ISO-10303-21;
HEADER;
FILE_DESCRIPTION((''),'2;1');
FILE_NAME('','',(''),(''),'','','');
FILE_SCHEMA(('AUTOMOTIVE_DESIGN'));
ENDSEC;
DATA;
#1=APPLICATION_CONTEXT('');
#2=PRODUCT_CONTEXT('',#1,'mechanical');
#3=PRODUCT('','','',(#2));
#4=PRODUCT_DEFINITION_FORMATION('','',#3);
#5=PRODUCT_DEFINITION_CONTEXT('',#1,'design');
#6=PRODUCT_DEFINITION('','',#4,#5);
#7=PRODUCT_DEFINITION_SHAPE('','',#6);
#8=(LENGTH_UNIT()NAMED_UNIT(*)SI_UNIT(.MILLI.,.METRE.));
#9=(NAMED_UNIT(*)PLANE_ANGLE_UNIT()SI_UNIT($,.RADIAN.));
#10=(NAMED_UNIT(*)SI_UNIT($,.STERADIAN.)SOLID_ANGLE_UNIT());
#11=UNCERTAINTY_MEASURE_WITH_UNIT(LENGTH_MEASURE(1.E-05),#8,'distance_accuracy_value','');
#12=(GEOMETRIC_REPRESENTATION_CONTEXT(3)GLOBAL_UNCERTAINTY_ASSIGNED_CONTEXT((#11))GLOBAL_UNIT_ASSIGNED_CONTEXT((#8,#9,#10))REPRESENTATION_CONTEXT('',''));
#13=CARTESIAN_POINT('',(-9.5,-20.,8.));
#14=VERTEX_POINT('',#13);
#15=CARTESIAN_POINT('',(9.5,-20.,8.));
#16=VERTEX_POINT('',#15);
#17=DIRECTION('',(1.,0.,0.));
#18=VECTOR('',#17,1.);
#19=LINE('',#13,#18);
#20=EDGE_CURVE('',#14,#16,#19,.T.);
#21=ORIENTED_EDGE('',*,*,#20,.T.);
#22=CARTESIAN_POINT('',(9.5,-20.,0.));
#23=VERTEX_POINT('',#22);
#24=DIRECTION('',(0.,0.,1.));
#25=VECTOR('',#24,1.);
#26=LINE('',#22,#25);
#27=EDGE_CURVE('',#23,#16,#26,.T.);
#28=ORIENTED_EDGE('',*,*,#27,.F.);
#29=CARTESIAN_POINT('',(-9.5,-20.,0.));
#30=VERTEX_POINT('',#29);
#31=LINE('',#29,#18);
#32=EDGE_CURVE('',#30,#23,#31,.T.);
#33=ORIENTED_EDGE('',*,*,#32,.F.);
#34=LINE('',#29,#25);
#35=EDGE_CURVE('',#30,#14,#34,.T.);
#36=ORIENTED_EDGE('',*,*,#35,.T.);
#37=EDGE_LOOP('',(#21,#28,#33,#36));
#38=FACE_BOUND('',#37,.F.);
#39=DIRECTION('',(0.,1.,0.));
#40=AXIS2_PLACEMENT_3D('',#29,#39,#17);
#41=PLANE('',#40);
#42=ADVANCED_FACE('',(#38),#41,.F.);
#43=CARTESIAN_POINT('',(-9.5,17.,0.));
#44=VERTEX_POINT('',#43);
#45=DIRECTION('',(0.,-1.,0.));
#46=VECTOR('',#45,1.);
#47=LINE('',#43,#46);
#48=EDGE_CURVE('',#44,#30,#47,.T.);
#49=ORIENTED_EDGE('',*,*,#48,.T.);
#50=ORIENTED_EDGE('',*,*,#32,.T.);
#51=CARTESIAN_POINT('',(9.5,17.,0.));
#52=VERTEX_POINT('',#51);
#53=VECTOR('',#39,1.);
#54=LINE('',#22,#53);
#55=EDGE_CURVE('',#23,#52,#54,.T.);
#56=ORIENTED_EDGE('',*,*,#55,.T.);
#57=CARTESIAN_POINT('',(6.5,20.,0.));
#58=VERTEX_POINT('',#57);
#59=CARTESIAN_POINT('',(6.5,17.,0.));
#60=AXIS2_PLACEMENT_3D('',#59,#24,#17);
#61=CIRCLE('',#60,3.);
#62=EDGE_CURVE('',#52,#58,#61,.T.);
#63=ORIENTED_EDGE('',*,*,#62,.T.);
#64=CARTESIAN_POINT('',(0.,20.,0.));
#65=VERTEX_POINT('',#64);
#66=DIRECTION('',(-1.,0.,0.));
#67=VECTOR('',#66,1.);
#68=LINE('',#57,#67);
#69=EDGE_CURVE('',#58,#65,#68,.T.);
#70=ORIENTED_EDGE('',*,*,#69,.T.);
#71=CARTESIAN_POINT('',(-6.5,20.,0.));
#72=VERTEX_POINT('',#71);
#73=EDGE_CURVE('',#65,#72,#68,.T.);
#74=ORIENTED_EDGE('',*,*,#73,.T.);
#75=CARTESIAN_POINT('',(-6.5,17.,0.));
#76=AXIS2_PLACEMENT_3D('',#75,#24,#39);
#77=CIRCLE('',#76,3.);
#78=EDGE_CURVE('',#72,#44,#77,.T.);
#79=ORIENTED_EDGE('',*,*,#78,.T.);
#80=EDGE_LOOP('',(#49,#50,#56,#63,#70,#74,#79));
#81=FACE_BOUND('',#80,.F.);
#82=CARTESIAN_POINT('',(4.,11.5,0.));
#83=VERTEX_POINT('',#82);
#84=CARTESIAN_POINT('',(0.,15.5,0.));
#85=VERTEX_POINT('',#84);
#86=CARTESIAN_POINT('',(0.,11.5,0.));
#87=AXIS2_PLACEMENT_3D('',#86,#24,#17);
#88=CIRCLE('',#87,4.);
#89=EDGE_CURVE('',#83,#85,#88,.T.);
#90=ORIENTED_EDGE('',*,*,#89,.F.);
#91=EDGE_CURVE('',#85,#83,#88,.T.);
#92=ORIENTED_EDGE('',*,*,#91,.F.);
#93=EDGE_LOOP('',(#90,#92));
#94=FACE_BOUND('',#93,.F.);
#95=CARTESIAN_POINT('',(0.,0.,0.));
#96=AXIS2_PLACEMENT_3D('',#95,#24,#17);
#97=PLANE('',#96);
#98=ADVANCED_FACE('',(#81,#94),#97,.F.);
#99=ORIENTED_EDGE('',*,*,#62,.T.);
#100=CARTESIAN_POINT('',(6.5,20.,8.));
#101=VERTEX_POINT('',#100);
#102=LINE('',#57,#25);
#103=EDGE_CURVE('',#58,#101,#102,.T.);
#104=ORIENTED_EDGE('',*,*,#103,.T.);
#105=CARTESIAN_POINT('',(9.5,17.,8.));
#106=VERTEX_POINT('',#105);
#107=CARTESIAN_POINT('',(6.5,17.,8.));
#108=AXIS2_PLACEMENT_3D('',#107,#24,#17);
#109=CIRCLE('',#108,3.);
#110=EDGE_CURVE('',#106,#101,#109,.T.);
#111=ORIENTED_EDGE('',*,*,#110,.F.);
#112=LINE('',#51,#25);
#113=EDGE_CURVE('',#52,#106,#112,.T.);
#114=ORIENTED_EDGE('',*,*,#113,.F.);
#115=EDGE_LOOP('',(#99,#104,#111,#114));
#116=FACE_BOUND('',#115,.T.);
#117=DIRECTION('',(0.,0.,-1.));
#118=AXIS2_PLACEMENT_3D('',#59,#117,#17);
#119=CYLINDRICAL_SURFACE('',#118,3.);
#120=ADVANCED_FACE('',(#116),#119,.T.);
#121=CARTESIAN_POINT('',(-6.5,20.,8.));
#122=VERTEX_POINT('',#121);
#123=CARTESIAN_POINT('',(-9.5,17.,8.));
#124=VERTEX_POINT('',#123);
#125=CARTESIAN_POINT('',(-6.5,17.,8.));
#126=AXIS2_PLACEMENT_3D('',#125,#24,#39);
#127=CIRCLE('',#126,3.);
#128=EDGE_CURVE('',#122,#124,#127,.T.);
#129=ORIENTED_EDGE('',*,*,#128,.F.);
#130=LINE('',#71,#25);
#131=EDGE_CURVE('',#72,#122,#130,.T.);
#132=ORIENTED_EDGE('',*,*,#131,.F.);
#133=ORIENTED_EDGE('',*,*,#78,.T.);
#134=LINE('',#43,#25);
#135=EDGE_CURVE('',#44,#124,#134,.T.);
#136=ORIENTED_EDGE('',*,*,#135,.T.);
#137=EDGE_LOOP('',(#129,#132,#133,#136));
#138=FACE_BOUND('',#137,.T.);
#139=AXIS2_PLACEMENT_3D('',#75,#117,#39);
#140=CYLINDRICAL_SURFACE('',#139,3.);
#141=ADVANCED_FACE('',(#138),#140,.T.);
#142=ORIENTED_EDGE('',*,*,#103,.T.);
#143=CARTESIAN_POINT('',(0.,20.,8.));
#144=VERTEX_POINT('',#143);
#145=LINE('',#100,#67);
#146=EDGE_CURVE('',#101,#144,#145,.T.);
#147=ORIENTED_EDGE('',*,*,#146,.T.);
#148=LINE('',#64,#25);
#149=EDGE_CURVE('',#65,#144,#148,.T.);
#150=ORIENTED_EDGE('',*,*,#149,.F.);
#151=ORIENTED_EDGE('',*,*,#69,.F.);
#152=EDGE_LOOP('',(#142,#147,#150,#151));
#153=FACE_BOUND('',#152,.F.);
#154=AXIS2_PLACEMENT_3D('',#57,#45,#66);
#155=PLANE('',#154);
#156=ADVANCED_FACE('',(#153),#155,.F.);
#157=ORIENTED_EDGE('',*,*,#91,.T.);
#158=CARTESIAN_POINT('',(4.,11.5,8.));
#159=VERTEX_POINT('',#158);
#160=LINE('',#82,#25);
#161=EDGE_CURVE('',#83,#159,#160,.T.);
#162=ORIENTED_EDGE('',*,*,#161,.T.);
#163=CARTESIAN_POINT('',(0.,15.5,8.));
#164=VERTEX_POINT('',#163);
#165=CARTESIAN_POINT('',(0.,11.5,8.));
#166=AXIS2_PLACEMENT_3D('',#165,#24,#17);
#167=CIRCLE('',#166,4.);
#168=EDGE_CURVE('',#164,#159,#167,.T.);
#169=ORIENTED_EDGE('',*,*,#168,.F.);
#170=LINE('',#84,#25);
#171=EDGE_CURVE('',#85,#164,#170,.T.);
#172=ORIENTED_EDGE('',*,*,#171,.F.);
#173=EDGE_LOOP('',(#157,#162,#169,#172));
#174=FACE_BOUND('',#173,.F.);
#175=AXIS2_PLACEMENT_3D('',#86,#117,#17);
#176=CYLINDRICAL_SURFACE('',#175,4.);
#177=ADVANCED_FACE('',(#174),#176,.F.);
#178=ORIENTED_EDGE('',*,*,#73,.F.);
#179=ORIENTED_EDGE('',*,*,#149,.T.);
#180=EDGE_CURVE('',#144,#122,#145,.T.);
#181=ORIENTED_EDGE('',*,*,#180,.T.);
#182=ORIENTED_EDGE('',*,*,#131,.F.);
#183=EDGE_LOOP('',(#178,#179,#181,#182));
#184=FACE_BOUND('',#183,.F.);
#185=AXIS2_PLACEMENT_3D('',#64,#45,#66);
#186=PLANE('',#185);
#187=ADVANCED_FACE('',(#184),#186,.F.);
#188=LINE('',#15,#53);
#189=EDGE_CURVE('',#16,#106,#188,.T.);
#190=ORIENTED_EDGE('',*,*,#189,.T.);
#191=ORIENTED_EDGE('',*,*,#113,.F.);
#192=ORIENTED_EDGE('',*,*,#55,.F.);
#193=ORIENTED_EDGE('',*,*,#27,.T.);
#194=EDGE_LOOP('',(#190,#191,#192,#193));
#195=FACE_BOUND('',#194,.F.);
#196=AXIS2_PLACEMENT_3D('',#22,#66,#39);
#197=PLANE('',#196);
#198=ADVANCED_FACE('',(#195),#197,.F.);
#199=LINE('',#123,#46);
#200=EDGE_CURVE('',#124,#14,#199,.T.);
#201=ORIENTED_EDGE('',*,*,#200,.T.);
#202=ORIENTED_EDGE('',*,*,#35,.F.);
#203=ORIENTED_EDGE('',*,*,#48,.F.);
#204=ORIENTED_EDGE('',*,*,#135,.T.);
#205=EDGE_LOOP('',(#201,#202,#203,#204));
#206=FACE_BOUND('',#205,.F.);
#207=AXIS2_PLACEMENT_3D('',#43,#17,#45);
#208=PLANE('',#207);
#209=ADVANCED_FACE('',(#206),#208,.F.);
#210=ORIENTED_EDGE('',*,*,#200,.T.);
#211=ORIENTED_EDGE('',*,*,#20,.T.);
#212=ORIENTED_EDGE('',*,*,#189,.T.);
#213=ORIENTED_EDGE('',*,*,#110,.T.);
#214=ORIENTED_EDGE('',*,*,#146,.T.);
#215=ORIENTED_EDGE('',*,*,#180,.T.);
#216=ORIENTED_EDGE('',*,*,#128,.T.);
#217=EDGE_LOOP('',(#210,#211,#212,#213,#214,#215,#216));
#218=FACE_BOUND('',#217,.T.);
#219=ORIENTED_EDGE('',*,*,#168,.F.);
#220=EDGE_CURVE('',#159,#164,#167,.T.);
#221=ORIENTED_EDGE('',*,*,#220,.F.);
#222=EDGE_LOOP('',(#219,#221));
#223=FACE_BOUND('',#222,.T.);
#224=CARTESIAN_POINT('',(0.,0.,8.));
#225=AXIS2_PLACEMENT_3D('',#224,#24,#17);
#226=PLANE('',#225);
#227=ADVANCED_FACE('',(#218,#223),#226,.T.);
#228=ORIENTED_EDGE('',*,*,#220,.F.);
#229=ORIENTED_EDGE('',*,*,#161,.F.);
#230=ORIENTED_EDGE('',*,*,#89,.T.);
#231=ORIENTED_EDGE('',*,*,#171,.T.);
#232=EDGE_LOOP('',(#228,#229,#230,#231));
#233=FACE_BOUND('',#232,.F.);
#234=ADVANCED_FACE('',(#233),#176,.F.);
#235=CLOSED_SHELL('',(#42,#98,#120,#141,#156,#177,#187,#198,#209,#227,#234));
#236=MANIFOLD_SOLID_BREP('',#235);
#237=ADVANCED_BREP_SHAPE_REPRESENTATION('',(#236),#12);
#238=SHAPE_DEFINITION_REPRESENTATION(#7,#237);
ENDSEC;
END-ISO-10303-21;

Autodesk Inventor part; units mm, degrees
ref_plane "YZ Plane" through (0, 0, 0) normal (1, 0, 0) x (0, 1, 0)
ref_plane "XZ Plane" through (0, 0, 0) normal (0, 1, 0) x (-1, 0, 0)
ref_plane "XY Plane" through (0, 0, 0) normal (0, 0, 1) x (1, 0, 0)
sketch "Sketch2" plane through (0, 0, 0) normal (0, 0, 1) x (1, 0, 0)
  line L0 (-9.5, -20) -> (9.5, -20)
  line L1 (9.5, -20) -> (9.5, 17)
  line L2 (6.5, 20) -> (-6.5, 20)
  line L3 (-9.5, 17) -> (-9.5, -20)
  line L4 (-9.5, -20) -> (9.5, 20) construction
  line L5 (9.5, -20) -> (-9.5, 20) construction
  arc A0 (-6.5, 20) -> (-9.5, 17) centre (-6.5, 17) ccw
  arc A1 (9.5, 17) -> (6.5, 20) centre (6.5, 17) ccw
  line L6 (0, 20) -> (0, 11.5)
  circle A2 centre (0, 11.5) radius 4
  point P0 (0, 0)
  dimension "d7" = 19
  dimension "d8" = 40
  dimension "d9" = 3
  dimension "d10" = 8.5
  dimension "d11" = 8
extrude "Extrusion2" add sketch "Sketch2" along normal blind 8
thread "Thread1" size "M8x1.25" class "6H" standard "ANSI Metric M Profile" full length
properties part number "Kengyel2"
